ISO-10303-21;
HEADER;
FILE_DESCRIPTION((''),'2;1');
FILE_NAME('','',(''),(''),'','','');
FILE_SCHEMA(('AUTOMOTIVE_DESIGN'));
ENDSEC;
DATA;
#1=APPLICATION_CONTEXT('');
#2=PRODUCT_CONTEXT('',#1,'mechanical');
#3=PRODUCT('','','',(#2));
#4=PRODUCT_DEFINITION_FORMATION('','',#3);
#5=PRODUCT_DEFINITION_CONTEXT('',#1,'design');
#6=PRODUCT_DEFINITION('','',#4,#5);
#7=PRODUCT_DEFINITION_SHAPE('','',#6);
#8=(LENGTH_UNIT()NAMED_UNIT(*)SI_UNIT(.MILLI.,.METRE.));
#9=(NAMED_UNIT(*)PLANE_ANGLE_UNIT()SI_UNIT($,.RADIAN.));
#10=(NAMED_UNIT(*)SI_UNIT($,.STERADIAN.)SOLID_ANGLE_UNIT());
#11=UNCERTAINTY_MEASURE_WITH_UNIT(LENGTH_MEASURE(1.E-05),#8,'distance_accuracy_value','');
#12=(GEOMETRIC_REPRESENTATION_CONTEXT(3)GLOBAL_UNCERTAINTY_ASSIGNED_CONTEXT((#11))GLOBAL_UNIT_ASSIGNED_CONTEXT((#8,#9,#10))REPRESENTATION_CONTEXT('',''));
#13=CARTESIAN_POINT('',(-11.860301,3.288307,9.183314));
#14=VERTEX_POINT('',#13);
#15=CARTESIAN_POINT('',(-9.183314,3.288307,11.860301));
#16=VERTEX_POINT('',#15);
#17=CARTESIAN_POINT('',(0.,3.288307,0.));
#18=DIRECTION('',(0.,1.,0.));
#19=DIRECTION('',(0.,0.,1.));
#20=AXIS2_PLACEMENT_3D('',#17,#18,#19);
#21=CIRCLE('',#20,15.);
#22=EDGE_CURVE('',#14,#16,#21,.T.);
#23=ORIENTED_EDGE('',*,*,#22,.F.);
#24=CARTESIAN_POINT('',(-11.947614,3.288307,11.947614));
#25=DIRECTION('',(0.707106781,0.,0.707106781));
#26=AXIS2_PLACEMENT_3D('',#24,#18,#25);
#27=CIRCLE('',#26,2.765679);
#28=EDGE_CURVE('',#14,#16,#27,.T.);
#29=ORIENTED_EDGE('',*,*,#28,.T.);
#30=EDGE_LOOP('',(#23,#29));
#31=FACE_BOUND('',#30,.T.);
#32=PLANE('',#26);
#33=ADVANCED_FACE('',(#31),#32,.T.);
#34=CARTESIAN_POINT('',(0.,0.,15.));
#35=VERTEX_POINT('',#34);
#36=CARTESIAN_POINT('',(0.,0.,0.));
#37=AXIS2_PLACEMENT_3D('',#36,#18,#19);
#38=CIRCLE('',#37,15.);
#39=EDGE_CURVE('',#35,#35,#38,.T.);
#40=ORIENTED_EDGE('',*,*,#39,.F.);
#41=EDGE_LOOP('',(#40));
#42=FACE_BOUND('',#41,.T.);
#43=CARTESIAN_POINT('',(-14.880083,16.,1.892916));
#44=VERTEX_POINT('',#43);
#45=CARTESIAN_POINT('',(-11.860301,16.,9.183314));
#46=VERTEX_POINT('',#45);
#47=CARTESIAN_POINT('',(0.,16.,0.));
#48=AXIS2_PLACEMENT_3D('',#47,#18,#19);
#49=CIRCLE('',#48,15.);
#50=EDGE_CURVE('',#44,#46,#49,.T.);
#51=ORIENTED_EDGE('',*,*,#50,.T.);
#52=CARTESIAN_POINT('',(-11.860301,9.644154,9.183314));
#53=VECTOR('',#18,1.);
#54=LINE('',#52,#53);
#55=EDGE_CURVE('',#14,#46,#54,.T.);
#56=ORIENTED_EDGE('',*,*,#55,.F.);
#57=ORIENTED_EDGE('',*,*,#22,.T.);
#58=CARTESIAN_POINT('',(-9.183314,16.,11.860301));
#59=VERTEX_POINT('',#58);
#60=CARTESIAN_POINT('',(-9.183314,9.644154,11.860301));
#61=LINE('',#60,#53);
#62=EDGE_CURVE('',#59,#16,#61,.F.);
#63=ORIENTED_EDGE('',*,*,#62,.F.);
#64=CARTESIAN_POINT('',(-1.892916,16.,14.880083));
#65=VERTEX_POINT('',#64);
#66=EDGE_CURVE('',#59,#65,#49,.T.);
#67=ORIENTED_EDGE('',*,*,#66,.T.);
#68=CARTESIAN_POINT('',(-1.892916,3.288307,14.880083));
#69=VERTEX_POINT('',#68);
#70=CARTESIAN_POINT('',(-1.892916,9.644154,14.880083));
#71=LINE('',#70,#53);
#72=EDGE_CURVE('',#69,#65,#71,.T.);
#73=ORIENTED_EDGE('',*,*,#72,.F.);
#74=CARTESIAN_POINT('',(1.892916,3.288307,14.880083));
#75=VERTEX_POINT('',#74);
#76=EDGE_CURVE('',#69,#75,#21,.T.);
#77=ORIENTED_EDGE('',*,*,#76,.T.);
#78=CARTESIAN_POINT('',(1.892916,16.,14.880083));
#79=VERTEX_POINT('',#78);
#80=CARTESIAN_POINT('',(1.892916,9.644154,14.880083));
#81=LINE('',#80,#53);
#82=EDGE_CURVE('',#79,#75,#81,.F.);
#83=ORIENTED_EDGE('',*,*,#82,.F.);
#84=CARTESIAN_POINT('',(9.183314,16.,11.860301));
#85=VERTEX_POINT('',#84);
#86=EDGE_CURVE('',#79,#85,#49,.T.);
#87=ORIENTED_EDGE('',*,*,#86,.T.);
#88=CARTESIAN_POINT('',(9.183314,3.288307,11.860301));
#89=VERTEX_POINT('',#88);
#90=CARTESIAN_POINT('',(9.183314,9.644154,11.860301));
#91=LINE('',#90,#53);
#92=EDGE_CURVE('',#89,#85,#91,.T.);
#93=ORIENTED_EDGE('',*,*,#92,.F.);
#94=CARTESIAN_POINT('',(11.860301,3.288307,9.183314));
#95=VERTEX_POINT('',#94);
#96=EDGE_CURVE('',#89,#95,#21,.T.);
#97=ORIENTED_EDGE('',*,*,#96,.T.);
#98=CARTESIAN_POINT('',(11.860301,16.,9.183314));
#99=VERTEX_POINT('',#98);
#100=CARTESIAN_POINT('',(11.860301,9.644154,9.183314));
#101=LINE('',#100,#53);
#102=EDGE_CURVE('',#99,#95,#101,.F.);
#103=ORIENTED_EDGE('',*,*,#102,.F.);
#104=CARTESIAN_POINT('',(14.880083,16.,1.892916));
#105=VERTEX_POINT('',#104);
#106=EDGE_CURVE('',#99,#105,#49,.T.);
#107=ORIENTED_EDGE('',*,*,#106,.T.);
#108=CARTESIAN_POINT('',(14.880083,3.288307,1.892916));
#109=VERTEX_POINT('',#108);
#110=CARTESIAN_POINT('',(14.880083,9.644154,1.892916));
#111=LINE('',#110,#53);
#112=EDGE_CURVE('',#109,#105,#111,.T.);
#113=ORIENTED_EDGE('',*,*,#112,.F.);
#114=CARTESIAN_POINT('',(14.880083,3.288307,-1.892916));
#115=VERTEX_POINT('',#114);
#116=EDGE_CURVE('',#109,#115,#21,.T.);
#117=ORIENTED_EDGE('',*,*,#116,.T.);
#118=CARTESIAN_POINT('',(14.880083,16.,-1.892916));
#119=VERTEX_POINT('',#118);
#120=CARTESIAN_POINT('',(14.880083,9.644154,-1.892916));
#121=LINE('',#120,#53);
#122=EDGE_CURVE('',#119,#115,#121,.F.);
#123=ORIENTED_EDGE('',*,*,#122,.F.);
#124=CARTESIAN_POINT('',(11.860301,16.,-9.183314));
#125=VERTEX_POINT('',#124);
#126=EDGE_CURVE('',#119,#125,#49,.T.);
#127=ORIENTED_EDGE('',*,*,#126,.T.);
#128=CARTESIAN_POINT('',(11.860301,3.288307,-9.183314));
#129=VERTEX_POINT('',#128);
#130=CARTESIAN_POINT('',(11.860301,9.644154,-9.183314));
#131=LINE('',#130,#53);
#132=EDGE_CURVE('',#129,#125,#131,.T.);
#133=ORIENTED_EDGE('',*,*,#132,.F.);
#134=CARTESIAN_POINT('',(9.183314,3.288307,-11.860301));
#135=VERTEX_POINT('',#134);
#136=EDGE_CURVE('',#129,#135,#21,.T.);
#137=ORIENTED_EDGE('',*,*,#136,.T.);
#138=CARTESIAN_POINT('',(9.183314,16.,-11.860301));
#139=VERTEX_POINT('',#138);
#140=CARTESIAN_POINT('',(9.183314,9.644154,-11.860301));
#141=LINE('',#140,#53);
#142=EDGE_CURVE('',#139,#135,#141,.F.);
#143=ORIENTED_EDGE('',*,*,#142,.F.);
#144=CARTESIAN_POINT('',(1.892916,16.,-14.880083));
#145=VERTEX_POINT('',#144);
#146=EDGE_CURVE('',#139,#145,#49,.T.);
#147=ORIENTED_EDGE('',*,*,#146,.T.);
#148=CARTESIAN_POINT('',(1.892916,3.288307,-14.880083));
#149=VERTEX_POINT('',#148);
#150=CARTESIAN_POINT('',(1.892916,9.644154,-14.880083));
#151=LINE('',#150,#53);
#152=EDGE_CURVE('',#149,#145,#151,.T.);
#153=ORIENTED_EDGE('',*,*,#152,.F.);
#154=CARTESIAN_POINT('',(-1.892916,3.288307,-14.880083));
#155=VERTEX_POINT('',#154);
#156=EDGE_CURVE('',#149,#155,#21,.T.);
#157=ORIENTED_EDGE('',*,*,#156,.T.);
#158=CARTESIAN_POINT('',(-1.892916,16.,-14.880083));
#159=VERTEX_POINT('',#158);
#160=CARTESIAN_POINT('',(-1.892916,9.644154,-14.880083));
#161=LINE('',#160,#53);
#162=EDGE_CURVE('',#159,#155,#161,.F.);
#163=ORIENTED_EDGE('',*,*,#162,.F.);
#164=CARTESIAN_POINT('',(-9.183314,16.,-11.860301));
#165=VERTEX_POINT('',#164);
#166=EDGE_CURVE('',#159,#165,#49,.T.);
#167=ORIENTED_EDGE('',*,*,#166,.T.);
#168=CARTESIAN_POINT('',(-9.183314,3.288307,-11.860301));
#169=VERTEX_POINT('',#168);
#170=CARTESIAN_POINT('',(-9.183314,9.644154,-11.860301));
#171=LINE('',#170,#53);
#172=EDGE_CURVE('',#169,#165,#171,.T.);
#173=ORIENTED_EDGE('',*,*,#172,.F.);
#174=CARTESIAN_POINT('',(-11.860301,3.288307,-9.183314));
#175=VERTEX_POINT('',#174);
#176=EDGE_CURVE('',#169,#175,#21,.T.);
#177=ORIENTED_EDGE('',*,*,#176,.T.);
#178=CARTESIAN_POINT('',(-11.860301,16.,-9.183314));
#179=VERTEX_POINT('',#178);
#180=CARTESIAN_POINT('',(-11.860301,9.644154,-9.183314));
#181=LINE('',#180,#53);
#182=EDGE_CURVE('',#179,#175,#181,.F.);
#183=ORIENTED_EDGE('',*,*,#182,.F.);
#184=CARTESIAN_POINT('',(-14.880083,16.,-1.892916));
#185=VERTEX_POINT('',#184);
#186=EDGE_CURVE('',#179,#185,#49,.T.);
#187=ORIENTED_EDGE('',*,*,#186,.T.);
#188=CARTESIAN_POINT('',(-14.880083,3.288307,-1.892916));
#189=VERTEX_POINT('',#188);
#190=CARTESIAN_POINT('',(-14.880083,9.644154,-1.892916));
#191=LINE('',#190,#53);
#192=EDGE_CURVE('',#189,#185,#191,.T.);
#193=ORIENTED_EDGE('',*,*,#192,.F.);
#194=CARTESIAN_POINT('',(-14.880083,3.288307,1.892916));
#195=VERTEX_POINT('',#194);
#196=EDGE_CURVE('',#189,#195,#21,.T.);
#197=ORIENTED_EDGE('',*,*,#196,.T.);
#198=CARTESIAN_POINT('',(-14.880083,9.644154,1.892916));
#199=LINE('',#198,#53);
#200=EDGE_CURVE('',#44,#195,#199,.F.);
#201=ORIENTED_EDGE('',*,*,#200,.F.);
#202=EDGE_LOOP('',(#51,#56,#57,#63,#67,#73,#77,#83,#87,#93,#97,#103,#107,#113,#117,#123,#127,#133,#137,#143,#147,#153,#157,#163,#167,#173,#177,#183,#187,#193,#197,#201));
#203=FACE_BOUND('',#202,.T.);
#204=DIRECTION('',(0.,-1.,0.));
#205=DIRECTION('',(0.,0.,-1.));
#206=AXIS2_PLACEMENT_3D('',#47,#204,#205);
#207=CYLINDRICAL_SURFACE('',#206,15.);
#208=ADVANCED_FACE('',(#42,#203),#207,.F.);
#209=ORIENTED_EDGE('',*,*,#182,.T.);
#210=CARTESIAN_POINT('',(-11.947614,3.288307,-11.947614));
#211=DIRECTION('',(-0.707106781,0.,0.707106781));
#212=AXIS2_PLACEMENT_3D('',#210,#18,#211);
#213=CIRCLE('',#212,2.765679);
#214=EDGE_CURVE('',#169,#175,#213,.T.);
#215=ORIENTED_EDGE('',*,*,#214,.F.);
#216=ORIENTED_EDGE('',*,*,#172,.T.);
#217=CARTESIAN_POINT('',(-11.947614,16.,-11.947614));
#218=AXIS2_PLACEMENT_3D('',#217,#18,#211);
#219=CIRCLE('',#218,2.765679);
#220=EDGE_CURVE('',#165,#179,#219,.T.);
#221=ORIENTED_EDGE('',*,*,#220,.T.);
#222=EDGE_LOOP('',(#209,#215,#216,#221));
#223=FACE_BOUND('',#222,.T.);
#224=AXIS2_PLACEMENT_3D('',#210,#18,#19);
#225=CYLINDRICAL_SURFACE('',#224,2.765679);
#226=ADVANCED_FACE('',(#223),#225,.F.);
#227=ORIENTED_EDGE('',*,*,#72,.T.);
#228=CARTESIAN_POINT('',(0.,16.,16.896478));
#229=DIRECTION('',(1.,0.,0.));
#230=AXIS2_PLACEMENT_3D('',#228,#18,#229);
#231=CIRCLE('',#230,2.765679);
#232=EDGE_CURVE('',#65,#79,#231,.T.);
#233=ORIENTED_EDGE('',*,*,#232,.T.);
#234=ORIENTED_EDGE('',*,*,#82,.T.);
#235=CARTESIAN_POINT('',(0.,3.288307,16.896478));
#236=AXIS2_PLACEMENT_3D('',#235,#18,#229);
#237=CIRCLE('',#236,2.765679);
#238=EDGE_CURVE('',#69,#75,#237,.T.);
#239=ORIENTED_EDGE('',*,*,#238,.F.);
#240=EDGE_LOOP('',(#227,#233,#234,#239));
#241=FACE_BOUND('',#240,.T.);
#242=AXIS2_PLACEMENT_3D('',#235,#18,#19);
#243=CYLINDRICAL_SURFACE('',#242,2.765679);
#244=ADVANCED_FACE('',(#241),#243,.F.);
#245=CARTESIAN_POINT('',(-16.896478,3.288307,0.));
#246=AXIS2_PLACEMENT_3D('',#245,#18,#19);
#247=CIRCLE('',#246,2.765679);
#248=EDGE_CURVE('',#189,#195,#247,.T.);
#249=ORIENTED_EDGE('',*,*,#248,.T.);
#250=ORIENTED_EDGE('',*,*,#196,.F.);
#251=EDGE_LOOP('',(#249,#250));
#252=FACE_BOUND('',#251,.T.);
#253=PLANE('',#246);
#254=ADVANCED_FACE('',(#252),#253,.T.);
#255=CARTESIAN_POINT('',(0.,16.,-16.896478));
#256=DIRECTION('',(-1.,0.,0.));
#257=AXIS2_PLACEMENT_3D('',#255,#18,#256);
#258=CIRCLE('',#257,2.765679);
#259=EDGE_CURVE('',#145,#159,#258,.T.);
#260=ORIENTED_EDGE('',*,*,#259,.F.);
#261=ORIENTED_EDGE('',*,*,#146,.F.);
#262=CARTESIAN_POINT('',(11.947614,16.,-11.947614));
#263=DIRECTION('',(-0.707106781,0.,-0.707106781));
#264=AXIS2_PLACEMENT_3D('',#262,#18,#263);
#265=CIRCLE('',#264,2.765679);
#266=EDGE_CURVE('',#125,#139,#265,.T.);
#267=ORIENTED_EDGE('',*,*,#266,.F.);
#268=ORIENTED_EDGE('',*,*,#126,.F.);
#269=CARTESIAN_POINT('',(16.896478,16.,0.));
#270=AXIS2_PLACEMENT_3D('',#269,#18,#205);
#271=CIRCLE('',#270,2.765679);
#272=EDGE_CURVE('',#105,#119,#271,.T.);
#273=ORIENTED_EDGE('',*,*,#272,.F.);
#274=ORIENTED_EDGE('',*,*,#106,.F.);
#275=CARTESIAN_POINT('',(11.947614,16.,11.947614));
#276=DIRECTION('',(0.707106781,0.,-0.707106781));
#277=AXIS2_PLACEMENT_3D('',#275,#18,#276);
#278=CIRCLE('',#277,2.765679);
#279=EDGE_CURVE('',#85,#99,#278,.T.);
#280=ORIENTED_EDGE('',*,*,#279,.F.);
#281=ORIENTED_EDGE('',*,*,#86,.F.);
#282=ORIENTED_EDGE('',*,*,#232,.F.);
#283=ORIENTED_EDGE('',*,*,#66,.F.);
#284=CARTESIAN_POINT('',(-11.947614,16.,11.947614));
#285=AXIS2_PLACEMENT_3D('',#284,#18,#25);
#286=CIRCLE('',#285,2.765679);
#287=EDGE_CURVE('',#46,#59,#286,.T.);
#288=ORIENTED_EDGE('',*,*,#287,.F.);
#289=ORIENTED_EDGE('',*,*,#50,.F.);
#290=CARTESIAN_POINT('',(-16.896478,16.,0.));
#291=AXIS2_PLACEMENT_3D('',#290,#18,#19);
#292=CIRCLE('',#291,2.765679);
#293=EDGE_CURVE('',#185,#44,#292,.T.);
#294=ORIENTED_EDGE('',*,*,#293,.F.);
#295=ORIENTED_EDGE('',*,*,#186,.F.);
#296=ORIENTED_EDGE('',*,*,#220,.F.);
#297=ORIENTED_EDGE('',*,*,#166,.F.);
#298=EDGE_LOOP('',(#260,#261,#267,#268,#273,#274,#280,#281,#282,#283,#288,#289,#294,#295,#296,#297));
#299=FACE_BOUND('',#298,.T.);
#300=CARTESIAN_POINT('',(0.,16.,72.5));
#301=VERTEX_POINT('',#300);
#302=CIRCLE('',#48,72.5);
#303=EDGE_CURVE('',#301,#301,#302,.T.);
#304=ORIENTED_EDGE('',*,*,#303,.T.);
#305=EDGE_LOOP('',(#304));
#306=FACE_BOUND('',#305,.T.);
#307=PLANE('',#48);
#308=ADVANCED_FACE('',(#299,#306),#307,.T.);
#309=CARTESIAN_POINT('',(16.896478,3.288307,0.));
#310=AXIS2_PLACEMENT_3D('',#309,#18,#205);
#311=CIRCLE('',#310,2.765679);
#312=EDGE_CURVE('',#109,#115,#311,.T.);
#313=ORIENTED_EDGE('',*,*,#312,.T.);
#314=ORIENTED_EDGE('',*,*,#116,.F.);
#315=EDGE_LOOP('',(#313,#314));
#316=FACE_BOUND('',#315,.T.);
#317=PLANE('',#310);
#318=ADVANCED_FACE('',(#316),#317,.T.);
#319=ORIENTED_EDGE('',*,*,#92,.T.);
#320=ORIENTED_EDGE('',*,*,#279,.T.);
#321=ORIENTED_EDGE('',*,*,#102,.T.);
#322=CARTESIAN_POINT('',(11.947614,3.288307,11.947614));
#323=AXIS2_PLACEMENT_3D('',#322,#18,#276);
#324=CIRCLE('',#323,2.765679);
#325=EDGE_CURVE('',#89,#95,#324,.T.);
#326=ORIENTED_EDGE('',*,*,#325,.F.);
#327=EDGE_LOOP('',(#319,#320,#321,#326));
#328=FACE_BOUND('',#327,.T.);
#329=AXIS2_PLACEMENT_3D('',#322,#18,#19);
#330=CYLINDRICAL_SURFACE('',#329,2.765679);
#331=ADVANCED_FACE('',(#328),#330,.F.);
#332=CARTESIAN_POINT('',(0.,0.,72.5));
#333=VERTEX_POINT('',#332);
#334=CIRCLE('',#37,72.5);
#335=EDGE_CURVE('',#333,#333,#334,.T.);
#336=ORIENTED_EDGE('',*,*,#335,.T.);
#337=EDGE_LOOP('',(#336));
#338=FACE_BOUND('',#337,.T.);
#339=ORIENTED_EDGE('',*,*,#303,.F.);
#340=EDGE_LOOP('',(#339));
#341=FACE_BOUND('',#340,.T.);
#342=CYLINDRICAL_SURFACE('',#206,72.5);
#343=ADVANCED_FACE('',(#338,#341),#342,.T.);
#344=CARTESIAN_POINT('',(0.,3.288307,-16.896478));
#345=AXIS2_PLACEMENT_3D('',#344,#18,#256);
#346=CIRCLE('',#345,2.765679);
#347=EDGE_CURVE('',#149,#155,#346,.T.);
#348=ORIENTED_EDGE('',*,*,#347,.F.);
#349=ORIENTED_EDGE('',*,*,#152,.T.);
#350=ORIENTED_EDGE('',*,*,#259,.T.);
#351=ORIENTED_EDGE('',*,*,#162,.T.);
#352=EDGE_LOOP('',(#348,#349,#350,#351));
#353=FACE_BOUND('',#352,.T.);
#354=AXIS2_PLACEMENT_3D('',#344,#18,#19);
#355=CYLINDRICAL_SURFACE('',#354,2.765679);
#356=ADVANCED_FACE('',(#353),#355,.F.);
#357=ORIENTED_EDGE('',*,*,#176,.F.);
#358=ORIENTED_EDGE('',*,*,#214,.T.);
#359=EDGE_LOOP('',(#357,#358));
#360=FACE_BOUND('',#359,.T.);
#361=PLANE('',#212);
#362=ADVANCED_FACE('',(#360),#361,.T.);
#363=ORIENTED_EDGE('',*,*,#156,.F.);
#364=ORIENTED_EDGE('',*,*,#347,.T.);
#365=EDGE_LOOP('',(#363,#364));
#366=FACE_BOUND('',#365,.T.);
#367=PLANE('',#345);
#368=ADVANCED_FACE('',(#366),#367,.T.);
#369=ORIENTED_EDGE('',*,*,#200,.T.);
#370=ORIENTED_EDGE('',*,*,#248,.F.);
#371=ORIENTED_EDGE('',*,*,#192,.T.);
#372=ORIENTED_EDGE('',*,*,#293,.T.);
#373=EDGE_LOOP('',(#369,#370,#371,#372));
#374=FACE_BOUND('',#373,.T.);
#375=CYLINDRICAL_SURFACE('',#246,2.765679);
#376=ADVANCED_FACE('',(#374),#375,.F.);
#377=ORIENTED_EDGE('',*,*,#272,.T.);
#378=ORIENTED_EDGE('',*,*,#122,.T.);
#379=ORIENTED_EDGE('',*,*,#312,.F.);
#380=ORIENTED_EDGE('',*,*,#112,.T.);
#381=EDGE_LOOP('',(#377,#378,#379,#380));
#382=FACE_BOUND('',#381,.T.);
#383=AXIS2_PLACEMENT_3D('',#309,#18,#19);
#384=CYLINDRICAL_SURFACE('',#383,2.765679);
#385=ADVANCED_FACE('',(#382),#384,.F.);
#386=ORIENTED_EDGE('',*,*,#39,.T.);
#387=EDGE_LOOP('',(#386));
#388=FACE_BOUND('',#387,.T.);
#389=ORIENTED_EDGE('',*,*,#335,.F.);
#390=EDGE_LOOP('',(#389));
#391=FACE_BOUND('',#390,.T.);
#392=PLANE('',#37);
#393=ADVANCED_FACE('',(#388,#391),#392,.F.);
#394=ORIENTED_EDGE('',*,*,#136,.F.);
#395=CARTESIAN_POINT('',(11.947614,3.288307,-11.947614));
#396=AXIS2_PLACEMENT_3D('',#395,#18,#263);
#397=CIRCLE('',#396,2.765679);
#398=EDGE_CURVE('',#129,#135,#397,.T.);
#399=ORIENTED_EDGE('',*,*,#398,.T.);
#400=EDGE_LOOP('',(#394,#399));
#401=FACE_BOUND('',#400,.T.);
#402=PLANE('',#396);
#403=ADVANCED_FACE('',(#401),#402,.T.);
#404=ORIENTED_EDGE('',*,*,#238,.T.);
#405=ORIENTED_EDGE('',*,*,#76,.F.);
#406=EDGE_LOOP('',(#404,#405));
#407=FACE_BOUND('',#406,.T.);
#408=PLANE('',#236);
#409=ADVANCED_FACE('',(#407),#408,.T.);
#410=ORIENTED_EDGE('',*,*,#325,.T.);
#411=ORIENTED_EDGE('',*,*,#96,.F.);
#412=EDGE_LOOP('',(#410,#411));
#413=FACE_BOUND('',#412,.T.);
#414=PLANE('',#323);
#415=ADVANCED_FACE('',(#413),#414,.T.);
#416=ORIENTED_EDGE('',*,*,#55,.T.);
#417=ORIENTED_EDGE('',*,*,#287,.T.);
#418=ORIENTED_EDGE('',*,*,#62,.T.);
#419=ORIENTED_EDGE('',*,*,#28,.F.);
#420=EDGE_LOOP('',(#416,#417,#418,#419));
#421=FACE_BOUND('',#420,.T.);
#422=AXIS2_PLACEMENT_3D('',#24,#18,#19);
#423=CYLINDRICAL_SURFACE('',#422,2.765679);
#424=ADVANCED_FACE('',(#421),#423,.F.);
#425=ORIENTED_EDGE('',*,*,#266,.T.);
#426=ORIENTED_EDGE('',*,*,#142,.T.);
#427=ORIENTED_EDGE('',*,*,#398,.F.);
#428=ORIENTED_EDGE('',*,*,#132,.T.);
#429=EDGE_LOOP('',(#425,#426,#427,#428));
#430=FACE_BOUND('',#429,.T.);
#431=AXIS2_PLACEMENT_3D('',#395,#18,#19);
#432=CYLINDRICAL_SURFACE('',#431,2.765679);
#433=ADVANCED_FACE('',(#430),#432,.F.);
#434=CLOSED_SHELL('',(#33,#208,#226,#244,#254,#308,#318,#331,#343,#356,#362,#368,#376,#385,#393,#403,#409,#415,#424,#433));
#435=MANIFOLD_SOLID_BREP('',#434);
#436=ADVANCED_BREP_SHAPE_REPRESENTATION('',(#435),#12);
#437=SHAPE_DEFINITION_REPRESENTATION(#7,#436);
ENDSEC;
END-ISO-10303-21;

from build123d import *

# Parameters (mm, degrees)
SKETCH1_R           = 72.5
BOSS_EXTRUDE1_DEPTH = 16
SKETCH2_R           = 15
CUT_EXTRUDE1_DEPTH  = 104.771383339
SKETCH3_R           = 2.765679026
CUT_EXTRUDE2_DEPTH  = 12.711692782
CIRPATTERN1_COUNT   = 8


with BuildPart() as part:
    # Sketch1 → Boss-Extrude1 (new body)
    with BuildSketch(Plane(origin=(0, 0, 0), x_dir=(1, 0, 0), z_dir=(0, 1, 0))):
        Circle(SKETCH1_R)
    extrude(amount=BOSS_EXTRUDE1_DEPTH)

    # Sketch2 → Cut-Extrude1 (cut, through all)
    with BuildSketch(Plane(origin=(0, 0, 0), x_dir=(1, 0, 0), z_dir=(0, 1, 0))):
        Circle(SKETCH2_R)
    extrude(amount=CUT_EXTRUDE1_DEPTH, mode=Mode.SUBTRACT)

    # Sketch3 → Cut-Extrude2 (cut)
    with BuildSketch(Plane(origin=(0, 16, 0), x_dir=(1, 0, 0), z_dir=(0, 1, 0))):
        with Locations((-16.896478271, 0)):
            Circle(SKETCH3_R)
    cut_extrude2 = extrude(amount=-CUT_EXTRUDE2_DEPTH, mode=Mode.SUBTRACT)

    # CirPattern1: Cut-Extrude2 ×8 about axis
    cirpattern1_axis = Axis((0, 0, 0), (0, 1, 0))
    for i in range(1, CIRPATTERN1_COUNT):
        add(cut_extrude2.rotate(cirpattern1_axis, i * 360 / CIRPATTERN1_COUNT), mode=Mode.SUBTRACT)


solid = part.part
